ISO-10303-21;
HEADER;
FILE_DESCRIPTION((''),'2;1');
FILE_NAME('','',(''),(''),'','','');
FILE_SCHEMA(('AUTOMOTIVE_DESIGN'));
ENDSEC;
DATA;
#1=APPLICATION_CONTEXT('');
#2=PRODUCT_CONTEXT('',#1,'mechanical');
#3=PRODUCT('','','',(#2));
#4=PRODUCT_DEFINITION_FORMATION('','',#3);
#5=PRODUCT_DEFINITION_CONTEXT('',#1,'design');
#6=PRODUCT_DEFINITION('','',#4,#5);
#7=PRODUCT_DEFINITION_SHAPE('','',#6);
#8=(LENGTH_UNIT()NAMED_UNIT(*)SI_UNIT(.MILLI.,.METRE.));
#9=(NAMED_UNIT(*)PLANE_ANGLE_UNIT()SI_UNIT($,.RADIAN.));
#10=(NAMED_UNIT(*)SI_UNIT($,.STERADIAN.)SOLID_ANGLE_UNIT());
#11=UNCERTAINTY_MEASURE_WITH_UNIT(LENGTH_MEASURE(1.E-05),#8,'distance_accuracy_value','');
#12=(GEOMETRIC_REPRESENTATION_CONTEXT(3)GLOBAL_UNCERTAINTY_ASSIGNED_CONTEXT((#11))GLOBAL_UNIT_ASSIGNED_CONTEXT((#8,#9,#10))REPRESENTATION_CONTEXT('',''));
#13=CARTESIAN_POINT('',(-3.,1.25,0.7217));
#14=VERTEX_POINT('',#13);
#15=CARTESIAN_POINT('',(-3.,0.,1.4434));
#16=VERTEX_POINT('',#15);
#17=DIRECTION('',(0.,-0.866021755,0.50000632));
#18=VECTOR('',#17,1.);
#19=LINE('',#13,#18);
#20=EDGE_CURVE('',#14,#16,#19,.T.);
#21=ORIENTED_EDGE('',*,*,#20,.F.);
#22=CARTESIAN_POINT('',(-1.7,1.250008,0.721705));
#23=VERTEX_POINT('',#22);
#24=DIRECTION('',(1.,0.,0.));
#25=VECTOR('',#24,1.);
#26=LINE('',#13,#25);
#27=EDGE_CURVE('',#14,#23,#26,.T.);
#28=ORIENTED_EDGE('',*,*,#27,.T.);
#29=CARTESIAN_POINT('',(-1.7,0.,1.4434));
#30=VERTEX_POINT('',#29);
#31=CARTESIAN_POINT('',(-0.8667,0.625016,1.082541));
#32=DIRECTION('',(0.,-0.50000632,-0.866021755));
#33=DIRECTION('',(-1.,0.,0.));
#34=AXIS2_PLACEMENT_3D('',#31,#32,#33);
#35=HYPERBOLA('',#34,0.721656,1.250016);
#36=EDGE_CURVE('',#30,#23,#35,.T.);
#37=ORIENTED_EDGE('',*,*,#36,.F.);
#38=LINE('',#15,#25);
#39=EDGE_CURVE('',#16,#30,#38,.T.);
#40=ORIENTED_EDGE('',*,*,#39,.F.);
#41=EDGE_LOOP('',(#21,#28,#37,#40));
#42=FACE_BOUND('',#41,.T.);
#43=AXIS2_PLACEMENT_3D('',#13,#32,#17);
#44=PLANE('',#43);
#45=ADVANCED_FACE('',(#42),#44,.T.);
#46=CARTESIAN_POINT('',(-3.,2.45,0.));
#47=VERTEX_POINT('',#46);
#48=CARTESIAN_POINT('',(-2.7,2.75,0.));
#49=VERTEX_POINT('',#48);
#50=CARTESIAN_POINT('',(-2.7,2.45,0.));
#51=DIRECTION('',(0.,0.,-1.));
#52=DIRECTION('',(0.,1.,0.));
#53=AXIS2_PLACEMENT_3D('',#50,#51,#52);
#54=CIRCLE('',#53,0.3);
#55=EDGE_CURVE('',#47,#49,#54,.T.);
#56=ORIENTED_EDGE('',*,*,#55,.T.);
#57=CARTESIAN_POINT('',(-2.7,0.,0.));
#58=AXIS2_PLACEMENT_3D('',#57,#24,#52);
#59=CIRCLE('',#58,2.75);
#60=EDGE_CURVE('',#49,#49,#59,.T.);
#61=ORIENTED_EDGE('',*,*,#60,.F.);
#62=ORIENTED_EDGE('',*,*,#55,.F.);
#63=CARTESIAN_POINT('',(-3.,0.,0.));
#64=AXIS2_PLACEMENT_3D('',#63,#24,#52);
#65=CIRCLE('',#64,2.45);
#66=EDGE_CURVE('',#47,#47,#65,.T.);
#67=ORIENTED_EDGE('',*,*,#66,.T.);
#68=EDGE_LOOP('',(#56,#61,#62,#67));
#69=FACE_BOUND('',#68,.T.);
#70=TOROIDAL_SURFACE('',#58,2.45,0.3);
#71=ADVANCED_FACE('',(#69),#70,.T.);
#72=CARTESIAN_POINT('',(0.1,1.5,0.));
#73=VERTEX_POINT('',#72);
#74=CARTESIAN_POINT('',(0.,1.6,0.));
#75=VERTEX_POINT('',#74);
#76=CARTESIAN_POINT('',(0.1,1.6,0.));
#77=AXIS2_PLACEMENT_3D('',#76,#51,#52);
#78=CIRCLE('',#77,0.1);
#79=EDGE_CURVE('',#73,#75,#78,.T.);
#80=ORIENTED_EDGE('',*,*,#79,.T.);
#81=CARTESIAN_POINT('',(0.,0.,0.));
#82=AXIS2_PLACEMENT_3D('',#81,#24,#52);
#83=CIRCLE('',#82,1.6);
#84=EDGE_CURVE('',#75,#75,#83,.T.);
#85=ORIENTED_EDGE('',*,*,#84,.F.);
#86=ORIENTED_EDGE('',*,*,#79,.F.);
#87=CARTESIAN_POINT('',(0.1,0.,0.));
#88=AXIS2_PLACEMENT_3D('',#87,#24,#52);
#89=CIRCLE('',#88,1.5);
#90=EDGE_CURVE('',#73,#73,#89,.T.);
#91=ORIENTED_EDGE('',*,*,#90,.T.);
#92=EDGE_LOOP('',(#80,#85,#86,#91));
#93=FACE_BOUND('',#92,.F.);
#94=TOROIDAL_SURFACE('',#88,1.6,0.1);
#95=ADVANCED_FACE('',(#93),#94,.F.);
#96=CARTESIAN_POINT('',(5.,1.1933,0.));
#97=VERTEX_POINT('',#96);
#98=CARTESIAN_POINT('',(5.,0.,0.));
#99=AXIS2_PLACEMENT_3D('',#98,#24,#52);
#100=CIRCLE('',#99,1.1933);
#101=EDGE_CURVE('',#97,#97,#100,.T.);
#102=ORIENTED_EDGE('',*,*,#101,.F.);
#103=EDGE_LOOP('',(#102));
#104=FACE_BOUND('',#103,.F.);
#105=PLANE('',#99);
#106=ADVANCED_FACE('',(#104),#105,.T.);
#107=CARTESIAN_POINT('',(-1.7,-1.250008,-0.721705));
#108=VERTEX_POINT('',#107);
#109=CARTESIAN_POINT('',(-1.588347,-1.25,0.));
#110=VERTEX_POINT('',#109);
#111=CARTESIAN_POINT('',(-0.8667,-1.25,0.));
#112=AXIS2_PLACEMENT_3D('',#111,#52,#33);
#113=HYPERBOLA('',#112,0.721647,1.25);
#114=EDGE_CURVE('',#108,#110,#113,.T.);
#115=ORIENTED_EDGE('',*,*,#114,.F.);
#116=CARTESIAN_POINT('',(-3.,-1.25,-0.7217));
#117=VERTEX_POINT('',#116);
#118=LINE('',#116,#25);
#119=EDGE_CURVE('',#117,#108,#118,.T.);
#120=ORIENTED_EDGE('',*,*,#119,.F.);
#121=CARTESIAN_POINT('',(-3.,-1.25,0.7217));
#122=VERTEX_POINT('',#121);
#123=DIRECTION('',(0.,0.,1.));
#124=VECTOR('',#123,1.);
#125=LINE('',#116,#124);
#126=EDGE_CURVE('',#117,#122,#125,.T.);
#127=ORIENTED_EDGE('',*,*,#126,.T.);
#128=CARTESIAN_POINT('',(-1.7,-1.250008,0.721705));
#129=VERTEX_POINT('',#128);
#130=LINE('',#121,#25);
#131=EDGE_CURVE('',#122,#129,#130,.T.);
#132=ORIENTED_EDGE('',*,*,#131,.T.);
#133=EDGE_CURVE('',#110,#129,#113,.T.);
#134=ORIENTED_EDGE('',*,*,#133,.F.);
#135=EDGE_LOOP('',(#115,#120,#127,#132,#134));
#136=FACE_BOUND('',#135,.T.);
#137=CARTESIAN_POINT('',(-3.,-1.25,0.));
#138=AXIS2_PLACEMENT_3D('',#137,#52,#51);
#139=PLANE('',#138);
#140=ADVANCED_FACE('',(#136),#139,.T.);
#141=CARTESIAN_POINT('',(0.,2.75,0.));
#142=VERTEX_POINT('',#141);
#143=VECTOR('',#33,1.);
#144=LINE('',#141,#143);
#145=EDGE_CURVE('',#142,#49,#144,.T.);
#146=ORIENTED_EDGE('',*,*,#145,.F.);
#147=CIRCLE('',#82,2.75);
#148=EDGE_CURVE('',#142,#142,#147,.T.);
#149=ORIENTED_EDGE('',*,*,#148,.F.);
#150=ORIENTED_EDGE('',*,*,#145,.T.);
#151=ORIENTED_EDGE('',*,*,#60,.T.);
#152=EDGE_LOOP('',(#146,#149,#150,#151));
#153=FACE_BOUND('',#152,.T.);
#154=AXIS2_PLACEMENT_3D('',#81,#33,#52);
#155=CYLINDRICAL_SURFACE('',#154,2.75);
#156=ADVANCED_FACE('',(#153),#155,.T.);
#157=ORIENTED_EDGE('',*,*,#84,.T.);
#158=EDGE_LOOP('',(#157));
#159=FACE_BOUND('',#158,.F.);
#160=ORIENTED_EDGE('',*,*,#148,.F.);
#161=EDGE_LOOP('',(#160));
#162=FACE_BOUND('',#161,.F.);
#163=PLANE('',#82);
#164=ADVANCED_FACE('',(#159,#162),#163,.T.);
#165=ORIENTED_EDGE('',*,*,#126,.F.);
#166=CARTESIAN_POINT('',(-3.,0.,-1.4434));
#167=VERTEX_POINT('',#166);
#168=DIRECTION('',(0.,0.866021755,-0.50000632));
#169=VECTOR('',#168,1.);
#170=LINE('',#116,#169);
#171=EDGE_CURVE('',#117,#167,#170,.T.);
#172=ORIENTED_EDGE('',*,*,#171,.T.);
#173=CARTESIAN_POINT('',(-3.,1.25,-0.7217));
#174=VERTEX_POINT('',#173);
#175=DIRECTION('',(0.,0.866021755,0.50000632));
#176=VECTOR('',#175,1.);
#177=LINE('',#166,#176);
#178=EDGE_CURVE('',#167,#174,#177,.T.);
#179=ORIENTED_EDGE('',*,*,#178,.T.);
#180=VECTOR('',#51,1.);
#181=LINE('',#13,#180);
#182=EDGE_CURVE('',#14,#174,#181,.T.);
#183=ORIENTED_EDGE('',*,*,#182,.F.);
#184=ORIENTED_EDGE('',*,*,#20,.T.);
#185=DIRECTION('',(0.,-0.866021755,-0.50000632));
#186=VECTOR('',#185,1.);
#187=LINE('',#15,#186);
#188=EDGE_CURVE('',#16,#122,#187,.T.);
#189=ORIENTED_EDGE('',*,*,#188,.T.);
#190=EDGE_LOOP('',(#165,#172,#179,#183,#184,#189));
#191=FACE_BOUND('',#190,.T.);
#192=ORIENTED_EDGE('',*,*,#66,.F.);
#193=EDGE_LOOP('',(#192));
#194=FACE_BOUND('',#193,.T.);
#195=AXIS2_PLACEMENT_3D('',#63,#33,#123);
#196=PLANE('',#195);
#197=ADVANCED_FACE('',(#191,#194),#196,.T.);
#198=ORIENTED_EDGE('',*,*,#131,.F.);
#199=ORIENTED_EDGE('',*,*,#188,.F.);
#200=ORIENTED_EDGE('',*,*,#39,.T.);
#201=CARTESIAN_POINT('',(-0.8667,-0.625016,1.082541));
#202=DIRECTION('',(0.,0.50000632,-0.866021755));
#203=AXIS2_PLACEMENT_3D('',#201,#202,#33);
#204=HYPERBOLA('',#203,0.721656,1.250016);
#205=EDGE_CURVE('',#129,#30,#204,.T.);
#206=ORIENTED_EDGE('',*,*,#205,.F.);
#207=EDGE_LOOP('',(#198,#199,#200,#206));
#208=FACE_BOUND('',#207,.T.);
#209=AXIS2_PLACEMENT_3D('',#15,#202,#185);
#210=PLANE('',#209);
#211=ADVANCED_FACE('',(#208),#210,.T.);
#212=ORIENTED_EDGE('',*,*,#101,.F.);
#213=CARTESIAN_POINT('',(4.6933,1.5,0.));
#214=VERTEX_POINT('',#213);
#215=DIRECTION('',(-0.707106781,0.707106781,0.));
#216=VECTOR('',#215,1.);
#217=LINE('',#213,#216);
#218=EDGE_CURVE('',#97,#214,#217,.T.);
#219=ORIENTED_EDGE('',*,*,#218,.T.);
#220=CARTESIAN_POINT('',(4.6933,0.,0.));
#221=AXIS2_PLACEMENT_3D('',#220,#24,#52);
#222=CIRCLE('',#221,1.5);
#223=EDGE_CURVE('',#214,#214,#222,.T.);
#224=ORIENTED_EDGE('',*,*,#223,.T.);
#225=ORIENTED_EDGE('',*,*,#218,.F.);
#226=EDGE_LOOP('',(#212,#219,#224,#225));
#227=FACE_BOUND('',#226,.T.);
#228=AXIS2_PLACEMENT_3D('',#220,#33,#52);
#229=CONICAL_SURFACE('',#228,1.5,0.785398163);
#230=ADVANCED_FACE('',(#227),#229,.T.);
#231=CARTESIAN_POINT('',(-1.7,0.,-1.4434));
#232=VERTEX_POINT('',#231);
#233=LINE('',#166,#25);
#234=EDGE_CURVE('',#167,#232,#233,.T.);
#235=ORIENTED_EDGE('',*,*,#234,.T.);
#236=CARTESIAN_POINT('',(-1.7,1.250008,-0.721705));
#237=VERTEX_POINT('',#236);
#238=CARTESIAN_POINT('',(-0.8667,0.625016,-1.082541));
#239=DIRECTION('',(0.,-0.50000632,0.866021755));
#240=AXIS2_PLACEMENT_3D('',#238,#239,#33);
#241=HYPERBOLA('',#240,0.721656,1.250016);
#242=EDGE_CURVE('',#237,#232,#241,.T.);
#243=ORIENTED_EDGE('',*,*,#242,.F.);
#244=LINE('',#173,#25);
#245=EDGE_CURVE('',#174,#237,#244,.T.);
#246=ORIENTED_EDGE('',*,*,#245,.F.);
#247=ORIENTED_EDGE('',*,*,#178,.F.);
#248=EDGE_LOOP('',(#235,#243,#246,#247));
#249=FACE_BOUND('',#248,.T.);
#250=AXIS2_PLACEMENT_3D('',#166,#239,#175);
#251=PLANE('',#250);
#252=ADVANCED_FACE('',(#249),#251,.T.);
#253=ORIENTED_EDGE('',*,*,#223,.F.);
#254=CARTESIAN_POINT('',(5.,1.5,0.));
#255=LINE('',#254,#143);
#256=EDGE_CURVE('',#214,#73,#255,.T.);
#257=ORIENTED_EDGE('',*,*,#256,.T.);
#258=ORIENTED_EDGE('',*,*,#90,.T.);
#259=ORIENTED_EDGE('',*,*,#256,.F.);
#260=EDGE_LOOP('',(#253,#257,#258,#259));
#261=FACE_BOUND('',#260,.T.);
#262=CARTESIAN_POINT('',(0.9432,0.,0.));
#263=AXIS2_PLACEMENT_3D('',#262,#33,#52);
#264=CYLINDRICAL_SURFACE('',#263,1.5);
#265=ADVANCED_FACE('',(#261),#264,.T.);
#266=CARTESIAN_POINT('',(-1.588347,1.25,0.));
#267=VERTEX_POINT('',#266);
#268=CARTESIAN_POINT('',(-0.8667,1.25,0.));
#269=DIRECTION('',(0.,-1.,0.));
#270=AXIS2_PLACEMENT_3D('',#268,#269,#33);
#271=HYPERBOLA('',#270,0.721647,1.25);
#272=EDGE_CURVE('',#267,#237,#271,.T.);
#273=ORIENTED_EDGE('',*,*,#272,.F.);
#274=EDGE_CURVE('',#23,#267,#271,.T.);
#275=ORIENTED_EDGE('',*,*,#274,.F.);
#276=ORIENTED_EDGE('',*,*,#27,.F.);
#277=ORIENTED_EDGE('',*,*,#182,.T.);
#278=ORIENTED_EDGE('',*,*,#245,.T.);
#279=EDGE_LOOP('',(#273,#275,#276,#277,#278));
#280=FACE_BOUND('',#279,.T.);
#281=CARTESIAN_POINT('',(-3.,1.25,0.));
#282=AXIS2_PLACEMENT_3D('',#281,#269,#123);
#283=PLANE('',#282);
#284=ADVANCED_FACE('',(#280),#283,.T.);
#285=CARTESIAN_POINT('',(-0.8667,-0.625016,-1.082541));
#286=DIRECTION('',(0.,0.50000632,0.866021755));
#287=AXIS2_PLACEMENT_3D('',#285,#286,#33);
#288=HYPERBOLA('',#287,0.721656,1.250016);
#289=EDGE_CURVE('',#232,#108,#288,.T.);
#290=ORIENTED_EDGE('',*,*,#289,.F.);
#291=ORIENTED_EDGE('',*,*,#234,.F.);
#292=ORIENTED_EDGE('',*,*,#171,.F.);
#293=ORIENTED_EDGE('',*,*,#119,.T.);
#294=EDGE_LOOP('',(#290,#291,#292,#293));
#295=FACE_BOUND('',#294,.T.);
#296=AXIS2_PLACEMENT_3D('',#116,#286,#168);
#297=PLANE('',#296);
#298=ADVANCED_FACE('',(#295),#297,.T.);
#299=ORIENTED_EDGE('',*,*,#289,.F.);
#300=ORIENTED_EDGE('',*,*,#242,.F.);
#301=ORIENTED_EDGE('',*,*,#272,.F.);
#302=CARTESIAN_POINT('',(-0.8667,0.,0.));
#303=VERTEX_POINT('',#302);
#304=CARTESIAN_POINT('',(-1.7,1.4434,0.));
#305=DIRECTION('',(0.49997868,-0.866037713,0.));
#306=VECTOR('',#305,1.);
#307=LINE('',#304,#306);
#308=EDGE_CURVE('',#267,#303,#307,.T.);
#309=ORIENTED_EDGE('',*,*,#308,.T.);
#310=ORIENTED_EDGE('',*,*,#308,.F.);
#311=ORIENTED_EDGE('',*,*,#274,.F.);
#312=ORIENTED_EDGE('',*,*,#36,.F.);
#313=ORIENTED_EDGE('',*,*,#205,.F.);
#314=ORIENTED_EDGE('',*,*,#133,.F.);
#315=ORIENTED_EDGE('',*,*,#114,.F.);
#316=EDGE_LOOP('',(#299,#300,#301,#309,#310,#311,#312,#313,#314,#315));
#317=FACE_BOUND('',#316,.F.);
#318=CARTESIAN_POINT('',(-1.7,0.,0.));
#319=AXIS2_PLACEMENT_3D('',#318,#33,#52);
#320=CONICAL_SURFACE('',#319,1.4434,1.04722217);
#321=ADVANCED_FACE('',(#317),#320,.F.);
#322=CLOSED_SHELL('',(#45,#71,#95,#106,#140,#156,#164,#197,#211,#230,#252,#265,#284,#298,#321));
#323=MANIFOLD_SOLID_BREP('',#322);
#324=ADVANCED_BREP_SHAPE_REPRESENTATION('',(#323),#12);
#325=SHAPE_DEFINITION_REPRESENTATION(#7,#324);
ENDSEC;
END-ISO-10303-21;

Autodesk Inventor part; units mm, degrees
ref_plane "YZ Plane" through (0, 0, 0) normal (1, 0, 0) x (0, 1, 0)
ref_plane "XZ Plane" through (0, 0, 0) normal (0, 1, 0) x (-1, 0, 0)
sketch "Skizze1" plane through (0, 0, 0) normal (0, 0, 1) x (1, 0, 0)
  line L0 (-0.8667, 0) -> (5, 0)
  line L1 (5, 0) -> (5, 1.5)
  line L2 (5, 1.5) -> (1.25, 1.5)
  line L3 (1.25, 1.5) -> (0.9432, 1.5)
  line L4 (0.9432, 1.5) -> (0, 1.5)
  line L5 (0, 1.5) -> (0, 2.75)
  line L6 (0, 2.75) -> (-3, 2.75)
  line L7 (-3, 2.75) -> (-3, 1.4434)
  line L8 (-3, 1.4434) -> (-1.7, 1.4434)
  line L9 (-1.7, 1.4434) -> (-0.8667, 0)
  line L10 (-4.6, 0) -> (6.6, 0) projected
  line L11 (0, -0.55) -> (0, 3.3) projected
  line L12 (1.25, 1.5) -> (0, 1.5) construction
  dimension "d1" = 3.75
  dimension "d2" = 0.3068
  dimension "d3" = 3
  dimension "d4" = 1.3
  dimension "d5" = 60
  dimension "d6" = 3
  dimension "d7" = 3
  dimension "d8" = 2.8868
  dimension "d9" = 5.5
  dimension "d26" = 5
revolve "Körper" add sketch "Skizze1" angle 360 about axis through (-0.8667, 0, 0) along (1, 0, 0)
sketch "Skizze2" plane through (-3, 0, 0) normal (-1, 0, 0) x (0, 0, 1)
  circle A0 centre (0, 0) radius 1.4434 projected
  line L0 (0, -3.85) -> (0, 3.85) projected
  line L1 (-3.85, 0) -> (3.85, 0) projected
  line L2 (1.4434, 0) -> (0.7217, -1.25)
  line L3 (0.7217, -1.25) -> (-0.7217, -1.25)
  line L4 (-0.7217, -1.25) -> (-1.4434, 0)
  line L5 (-1.4434, 0) -> (-0.7217, 1.25)
  line L6 (-0.7217, 1.25) -> (0.7217, 1.25)
  line L7 (0.7217, 1.25) -> (1.4434, 0)
extrude "Loch" add sketch "Skizze2" against normal up to next contours L7 A0 | A0 L2 | L6 L0 A0 | A0 L0 L3 | L0 L6 A0 | A0 L3 L0 | L4 A0 | A0 L5
fillet "Rundung1" radius 0.3 1 edges at (-3, -2.75, 0)
thread "Gewinde" size "M3x0.5" class "6g" standard "ISO Metric profile" length 3.75
chamfer "Fase1" distance 0.3067 distance2 0.3067 1 edges at (5, -1.5, 0) measured on face at (5, -0.2617, -0.7882)
ref_plane "Work Plane1" through (29, 0, 0) normal (0, -1, 0) x (1, 0, 0)
fillet "Fillet2" radius 0.1 1 edges at (0, -1.5, 0)
equation "\"d1\" = GEL"
equation "\"d3\" = KOH"
equation "\"d4\" = INTI"
equation "\"d6\" = GD"
equation "\"d7\" = BDM"
equation "\"d8\" = 1.1547 * SW"
equation "\"d9\" = KOD"
equation "\"d26\" = NLG"
equation "\"d30\" = R"
equation "\"d17\" = RR"
equation "\"d13\" = GEL"
equation "\"d15\" = -0.5 * SPD + 0.5 * GD"
equation "\"d16\" = GUL"
equation "\"GD\" = 3"
equation "\"NLG\" = 5"
equation "\"GEL\" = 3.75"
equation "\"KOD\" = 5.5"
equation "\"KOH\" = 3"
equation "\"INTI\" = 1.3"
equation "\"GAL\" = 0.61345 * PTC"
equation "\"GUL\" = 0.61345 * PTC"
equation "\"BDM\" = NND"
equation "\"SW\" = 2.5"
equation "\"RR\" = 0.3"
equation "\"SPD\" = NND - 1.2269 * PTC"
equation "\"R\" = 0.1"
equation "\"TOA\" = 30deg"
equation "\"GD1\" = THREADDIA - 1.2269 * PTC"
equation "\"THREADDIA\" = 3"
equation "\"FAWI\" = 45deg"
equation "\"PTC\" = 0.5"
equation "\"NND\" = 3"
equation "\"E0\" = 1.155 * SW"
properties part number "ISO 4762 - M3 x 5" material "Edelstahl, 440C"
